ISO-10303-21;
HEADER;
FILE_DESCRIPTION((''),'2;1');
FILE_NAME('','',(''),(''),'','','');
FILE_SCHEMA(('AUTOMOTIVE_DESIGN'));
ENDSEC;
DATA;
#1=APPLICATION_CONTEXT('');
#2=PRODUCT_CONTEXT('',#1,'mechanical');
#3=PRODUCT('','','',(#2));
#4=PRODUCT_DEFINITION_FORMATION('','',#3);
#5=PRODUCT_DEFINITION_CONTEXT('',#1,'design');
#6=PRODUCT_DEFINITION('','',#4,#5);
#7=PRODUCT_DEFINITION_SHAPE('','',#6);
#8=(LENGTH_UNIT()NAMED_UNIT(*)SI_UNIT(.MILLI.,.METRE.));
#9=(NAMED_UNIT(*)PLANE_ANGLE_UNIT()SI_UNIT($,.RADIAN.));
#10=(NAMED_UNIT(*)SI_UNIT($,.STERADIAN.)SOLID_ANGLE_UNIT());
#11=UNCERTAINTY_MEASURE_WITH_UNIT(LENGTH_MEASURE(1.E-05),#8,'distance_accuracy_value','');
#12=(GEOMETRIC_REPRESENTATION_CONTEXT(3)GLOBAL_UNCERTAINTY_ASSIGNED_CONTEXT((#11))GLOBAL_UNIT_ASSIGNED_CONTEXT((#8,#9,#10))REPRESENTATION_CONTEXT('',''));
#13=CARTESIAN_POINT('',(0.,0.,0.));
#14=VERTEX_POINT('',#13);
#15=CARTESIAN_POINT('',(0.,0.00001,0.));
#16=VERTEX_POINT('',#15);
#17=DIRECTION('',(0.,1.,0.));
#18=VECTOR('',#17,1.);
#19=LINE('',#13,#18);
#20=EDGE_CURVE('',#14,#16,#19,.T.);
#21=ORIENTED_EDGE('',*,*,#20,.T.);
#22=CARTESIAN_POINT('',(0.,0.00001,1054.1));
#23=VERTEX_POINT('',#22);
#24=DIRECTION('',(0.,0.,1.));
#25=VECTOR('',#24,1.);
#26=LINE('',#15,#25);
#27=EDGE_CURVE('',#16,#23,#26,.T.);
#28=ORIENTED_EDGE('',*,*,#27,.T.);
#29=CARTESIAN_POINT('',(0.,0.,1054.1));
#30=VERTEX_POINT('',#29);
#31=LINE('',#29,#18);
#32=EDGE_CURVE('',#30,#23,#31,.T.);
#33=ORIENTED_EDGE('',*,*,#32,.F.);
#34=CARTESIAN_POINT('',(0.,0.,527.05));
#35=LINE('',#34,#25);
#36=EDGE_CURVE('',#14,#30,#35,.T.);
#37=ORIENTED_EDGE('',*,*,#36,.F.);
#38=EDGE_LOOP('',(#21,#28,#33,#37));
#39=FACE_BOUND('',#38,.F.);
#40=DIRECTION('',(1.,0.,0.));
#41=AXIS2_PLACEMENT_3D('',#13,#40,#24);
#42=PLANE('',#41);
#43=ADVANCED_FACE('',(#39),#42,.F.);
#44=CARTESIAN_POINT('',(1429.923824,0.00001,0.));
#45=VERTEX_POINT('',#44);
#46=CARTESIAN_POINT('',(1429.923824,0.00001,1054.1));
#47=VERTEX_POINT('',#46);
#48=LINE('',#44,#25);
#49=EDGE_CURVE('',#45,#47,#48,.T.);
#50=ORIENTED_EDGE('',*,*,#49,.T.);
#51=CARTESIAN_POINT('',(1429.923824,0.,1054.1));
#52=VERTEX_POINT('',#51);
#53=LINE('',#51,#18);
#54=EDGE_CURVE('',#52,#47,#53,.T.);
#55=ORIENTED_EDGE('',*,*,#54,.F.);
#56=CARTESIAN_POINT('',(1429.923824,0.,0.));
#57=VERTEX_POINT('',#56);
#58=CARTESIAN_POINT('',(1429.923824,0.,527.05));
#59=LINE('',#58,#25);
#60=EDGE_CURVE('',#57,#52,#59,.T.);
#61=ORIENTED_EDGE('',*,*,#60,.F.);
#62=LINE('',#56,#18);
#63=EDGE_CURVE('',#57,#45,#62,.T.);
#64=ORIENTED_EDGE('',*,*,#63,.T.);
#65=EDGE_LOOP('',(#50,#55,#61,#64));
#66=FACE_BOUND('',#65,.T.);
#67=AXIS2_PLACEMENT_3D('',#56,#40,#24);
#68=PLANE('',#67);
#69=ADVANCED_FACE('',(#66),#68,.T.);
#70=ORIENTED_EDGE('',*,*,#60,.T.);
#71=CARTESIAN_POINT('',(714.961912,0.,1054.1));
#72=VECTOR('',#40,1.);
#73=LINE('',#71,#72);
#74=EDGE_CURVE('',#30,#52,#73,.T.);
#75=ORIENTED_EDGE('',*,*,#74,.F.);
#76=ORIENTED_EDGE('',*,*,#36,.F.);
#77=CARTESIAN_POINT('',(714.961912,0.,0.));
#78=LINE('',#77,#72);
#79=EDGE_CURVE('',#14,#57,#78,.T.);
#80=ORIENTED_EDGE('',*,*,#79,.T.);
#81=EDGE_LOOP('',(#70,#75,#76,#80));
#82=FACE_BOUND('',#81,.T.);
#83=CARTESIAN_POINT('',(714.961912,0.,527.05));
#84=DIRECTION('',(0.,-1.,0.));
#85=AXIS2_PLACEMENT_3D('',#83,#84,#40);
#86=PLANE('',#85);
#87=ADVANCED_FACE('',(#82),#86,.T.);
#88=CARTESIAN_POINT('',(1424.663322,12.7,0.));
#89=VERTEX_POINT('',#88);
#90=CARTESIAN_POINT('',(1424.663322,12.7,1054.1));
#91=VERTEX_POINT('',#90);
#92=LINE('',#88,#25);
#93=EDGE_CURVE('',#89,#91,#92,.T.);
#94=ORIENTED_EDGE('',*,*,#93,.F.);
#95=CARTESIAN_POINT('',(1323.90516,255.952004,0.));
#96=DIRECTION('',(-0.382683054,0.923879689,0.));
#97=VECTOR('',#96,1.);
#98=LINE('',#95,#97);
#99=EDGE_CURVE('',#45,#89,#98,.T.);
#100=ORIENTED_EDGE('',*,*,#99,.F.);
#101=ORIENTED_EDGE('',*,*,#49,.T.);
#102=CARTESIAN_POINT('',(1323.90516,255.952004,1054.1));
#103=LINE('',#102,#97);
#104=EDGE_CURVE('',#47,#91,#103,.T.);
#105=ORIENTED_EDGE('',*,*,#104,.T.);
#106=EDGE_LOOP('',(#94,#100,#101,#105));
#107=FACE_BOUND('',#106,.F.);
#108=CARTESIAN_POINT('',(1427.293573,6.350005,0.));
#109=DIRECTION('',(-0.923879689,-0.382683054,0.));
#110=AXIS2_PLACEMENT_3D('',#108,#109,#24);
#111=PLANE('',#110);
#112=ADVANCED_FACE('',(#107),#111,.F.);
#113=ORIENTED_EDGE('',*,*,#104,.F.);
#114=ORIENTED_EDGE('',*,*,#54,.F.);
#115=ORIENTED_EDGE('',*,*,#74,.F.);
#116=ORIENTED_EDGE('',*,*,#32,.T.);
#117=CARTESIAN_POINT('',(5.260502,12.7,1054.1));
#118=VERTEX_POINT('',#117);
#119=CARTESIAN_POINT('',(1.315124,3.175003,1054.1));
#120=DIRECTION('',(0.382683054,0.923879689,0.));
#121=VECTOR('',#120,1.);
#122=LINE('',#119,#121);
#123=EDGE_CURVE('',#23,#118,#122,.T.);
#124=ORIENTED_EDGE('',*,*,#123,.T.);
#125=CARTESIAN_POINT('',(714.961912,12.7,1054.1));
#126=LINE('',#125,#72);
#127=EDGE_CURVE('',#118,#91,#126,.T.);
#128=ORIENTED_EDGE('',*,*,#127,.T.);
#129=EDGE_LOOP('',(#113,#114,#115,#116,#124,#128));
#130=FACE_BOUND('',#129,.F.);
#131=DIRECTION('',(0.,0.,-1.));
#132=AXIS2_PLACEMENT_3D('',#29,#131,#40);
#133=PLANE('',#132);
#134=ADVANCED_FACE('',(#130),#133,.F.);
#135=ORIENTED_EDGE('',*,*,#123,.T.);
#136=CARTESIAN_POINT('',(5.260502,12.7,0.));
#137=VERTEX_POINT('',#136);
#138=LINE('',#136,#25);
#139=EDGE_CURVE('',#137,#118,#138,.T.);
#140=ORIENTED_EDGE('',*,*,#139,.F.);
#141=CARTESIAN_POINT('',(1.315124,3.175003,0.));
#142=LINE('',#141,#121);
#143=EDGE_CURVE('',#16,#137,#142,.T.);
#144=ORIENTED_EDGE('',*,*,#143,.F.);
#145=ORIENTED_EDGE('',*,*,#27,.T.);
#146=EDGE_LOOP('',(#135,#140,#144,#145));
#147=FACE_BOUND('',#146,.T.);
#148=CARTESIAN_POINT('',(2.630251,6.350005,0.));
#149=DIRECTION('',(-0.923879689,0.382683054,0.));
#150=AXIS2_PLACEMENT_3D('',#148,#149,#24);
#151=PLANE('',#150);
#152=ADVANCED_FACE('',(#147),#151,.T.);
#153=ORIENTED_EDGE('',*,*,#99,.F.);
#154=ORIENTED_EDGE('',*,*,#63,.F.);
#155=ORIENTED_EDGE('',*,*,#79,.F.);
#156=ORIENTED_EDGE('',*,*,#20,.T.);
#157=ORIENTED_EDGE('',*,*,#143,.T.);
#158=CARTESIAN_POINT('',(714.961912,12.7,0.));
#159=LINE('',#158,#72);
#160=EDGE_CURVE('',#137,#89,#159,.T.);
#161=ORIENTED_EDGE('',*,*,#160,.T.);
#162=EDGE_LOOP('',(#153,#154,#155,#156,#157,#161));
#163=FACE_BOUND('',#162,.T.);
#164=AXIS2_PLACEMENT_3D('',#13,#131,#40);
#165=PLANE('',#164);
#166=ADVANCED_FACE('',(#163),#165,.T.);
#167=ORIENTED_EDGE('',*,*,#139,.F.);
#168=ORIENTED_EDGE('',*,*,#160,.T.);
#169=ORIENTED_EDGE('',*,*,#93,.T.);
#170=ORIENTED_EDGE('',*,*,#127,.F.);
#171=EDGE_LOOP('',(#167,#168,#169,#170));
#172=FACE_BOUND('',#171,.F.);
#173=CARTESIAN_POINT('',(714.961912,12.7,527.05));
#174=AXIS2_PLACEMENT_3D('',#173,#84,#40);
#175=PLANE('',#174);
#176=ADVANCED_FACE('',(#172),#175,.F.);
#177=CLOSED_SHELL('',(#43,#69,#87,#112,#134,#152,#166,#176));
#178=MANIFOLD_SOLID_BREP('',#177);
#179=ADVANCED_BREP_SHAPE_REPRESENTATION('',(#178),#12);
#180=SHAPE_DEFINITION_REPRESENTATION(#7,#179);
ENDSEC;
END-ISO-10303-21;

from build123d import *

# Parameters (mm, degrees)
F0_W       = 1429.9238244843
F0_H       = 1054.1
F1_DEPTH   = 12.7
F2_SIZE2   = 5.260502
F2_SIZE    = 12.69999
F2_2_SIZE2 = 5.260502
F2_2_SIZE  = 12.69999


# Not quite as in the source:
# - a fillet or chamfer is up to 0.001 mm smaller than in the source, because OpenCascade refuses the exact size


with BuildPart() as f1:
    # F0 (on Front) → F1 (new body)
    with BuildSketch(Plane.XZ):
        with Locations((714.9619122421, 527.05)):
            Rectangle(F0_W, F0_H)
    extrude(amount=-F1_DEPTH)

    # F2 (size 12.7 and 5.2605122421 in the source; OpenCascade refuses exactly that, so slightly less here)
    f2_edges = [f1.edges().sort_by_distance(p)[0] for p in [
        (1429.923824, 12.7, 527.05),
    ]]
    f2_side = f1.faces().sort_by_distance((1429.923824, 6.35, 527.05))[0]
    chamfer(f2_edges, length=F2_SIZE, length2=F2_SIZE2, reference=f2_side)

    # F2#2 (size 12.7 and 5.2605122421 in the source; OpenCascade refuses exactly that, so slightly less here)
    f2_2_edges = [f1.edges().sort_by_distance(p)[0] for p in [
        (0, 12.7, 527.05),
    ]]
    f2_2_side = f1.faces().sort_by_distance((0, 6.35, 527.05))[0]
    chamfer(f2_2_edges, length=F2_2_SIZE, length2=F2_2_SIZE2, reference=f2_2_side)


solid = f1.part
